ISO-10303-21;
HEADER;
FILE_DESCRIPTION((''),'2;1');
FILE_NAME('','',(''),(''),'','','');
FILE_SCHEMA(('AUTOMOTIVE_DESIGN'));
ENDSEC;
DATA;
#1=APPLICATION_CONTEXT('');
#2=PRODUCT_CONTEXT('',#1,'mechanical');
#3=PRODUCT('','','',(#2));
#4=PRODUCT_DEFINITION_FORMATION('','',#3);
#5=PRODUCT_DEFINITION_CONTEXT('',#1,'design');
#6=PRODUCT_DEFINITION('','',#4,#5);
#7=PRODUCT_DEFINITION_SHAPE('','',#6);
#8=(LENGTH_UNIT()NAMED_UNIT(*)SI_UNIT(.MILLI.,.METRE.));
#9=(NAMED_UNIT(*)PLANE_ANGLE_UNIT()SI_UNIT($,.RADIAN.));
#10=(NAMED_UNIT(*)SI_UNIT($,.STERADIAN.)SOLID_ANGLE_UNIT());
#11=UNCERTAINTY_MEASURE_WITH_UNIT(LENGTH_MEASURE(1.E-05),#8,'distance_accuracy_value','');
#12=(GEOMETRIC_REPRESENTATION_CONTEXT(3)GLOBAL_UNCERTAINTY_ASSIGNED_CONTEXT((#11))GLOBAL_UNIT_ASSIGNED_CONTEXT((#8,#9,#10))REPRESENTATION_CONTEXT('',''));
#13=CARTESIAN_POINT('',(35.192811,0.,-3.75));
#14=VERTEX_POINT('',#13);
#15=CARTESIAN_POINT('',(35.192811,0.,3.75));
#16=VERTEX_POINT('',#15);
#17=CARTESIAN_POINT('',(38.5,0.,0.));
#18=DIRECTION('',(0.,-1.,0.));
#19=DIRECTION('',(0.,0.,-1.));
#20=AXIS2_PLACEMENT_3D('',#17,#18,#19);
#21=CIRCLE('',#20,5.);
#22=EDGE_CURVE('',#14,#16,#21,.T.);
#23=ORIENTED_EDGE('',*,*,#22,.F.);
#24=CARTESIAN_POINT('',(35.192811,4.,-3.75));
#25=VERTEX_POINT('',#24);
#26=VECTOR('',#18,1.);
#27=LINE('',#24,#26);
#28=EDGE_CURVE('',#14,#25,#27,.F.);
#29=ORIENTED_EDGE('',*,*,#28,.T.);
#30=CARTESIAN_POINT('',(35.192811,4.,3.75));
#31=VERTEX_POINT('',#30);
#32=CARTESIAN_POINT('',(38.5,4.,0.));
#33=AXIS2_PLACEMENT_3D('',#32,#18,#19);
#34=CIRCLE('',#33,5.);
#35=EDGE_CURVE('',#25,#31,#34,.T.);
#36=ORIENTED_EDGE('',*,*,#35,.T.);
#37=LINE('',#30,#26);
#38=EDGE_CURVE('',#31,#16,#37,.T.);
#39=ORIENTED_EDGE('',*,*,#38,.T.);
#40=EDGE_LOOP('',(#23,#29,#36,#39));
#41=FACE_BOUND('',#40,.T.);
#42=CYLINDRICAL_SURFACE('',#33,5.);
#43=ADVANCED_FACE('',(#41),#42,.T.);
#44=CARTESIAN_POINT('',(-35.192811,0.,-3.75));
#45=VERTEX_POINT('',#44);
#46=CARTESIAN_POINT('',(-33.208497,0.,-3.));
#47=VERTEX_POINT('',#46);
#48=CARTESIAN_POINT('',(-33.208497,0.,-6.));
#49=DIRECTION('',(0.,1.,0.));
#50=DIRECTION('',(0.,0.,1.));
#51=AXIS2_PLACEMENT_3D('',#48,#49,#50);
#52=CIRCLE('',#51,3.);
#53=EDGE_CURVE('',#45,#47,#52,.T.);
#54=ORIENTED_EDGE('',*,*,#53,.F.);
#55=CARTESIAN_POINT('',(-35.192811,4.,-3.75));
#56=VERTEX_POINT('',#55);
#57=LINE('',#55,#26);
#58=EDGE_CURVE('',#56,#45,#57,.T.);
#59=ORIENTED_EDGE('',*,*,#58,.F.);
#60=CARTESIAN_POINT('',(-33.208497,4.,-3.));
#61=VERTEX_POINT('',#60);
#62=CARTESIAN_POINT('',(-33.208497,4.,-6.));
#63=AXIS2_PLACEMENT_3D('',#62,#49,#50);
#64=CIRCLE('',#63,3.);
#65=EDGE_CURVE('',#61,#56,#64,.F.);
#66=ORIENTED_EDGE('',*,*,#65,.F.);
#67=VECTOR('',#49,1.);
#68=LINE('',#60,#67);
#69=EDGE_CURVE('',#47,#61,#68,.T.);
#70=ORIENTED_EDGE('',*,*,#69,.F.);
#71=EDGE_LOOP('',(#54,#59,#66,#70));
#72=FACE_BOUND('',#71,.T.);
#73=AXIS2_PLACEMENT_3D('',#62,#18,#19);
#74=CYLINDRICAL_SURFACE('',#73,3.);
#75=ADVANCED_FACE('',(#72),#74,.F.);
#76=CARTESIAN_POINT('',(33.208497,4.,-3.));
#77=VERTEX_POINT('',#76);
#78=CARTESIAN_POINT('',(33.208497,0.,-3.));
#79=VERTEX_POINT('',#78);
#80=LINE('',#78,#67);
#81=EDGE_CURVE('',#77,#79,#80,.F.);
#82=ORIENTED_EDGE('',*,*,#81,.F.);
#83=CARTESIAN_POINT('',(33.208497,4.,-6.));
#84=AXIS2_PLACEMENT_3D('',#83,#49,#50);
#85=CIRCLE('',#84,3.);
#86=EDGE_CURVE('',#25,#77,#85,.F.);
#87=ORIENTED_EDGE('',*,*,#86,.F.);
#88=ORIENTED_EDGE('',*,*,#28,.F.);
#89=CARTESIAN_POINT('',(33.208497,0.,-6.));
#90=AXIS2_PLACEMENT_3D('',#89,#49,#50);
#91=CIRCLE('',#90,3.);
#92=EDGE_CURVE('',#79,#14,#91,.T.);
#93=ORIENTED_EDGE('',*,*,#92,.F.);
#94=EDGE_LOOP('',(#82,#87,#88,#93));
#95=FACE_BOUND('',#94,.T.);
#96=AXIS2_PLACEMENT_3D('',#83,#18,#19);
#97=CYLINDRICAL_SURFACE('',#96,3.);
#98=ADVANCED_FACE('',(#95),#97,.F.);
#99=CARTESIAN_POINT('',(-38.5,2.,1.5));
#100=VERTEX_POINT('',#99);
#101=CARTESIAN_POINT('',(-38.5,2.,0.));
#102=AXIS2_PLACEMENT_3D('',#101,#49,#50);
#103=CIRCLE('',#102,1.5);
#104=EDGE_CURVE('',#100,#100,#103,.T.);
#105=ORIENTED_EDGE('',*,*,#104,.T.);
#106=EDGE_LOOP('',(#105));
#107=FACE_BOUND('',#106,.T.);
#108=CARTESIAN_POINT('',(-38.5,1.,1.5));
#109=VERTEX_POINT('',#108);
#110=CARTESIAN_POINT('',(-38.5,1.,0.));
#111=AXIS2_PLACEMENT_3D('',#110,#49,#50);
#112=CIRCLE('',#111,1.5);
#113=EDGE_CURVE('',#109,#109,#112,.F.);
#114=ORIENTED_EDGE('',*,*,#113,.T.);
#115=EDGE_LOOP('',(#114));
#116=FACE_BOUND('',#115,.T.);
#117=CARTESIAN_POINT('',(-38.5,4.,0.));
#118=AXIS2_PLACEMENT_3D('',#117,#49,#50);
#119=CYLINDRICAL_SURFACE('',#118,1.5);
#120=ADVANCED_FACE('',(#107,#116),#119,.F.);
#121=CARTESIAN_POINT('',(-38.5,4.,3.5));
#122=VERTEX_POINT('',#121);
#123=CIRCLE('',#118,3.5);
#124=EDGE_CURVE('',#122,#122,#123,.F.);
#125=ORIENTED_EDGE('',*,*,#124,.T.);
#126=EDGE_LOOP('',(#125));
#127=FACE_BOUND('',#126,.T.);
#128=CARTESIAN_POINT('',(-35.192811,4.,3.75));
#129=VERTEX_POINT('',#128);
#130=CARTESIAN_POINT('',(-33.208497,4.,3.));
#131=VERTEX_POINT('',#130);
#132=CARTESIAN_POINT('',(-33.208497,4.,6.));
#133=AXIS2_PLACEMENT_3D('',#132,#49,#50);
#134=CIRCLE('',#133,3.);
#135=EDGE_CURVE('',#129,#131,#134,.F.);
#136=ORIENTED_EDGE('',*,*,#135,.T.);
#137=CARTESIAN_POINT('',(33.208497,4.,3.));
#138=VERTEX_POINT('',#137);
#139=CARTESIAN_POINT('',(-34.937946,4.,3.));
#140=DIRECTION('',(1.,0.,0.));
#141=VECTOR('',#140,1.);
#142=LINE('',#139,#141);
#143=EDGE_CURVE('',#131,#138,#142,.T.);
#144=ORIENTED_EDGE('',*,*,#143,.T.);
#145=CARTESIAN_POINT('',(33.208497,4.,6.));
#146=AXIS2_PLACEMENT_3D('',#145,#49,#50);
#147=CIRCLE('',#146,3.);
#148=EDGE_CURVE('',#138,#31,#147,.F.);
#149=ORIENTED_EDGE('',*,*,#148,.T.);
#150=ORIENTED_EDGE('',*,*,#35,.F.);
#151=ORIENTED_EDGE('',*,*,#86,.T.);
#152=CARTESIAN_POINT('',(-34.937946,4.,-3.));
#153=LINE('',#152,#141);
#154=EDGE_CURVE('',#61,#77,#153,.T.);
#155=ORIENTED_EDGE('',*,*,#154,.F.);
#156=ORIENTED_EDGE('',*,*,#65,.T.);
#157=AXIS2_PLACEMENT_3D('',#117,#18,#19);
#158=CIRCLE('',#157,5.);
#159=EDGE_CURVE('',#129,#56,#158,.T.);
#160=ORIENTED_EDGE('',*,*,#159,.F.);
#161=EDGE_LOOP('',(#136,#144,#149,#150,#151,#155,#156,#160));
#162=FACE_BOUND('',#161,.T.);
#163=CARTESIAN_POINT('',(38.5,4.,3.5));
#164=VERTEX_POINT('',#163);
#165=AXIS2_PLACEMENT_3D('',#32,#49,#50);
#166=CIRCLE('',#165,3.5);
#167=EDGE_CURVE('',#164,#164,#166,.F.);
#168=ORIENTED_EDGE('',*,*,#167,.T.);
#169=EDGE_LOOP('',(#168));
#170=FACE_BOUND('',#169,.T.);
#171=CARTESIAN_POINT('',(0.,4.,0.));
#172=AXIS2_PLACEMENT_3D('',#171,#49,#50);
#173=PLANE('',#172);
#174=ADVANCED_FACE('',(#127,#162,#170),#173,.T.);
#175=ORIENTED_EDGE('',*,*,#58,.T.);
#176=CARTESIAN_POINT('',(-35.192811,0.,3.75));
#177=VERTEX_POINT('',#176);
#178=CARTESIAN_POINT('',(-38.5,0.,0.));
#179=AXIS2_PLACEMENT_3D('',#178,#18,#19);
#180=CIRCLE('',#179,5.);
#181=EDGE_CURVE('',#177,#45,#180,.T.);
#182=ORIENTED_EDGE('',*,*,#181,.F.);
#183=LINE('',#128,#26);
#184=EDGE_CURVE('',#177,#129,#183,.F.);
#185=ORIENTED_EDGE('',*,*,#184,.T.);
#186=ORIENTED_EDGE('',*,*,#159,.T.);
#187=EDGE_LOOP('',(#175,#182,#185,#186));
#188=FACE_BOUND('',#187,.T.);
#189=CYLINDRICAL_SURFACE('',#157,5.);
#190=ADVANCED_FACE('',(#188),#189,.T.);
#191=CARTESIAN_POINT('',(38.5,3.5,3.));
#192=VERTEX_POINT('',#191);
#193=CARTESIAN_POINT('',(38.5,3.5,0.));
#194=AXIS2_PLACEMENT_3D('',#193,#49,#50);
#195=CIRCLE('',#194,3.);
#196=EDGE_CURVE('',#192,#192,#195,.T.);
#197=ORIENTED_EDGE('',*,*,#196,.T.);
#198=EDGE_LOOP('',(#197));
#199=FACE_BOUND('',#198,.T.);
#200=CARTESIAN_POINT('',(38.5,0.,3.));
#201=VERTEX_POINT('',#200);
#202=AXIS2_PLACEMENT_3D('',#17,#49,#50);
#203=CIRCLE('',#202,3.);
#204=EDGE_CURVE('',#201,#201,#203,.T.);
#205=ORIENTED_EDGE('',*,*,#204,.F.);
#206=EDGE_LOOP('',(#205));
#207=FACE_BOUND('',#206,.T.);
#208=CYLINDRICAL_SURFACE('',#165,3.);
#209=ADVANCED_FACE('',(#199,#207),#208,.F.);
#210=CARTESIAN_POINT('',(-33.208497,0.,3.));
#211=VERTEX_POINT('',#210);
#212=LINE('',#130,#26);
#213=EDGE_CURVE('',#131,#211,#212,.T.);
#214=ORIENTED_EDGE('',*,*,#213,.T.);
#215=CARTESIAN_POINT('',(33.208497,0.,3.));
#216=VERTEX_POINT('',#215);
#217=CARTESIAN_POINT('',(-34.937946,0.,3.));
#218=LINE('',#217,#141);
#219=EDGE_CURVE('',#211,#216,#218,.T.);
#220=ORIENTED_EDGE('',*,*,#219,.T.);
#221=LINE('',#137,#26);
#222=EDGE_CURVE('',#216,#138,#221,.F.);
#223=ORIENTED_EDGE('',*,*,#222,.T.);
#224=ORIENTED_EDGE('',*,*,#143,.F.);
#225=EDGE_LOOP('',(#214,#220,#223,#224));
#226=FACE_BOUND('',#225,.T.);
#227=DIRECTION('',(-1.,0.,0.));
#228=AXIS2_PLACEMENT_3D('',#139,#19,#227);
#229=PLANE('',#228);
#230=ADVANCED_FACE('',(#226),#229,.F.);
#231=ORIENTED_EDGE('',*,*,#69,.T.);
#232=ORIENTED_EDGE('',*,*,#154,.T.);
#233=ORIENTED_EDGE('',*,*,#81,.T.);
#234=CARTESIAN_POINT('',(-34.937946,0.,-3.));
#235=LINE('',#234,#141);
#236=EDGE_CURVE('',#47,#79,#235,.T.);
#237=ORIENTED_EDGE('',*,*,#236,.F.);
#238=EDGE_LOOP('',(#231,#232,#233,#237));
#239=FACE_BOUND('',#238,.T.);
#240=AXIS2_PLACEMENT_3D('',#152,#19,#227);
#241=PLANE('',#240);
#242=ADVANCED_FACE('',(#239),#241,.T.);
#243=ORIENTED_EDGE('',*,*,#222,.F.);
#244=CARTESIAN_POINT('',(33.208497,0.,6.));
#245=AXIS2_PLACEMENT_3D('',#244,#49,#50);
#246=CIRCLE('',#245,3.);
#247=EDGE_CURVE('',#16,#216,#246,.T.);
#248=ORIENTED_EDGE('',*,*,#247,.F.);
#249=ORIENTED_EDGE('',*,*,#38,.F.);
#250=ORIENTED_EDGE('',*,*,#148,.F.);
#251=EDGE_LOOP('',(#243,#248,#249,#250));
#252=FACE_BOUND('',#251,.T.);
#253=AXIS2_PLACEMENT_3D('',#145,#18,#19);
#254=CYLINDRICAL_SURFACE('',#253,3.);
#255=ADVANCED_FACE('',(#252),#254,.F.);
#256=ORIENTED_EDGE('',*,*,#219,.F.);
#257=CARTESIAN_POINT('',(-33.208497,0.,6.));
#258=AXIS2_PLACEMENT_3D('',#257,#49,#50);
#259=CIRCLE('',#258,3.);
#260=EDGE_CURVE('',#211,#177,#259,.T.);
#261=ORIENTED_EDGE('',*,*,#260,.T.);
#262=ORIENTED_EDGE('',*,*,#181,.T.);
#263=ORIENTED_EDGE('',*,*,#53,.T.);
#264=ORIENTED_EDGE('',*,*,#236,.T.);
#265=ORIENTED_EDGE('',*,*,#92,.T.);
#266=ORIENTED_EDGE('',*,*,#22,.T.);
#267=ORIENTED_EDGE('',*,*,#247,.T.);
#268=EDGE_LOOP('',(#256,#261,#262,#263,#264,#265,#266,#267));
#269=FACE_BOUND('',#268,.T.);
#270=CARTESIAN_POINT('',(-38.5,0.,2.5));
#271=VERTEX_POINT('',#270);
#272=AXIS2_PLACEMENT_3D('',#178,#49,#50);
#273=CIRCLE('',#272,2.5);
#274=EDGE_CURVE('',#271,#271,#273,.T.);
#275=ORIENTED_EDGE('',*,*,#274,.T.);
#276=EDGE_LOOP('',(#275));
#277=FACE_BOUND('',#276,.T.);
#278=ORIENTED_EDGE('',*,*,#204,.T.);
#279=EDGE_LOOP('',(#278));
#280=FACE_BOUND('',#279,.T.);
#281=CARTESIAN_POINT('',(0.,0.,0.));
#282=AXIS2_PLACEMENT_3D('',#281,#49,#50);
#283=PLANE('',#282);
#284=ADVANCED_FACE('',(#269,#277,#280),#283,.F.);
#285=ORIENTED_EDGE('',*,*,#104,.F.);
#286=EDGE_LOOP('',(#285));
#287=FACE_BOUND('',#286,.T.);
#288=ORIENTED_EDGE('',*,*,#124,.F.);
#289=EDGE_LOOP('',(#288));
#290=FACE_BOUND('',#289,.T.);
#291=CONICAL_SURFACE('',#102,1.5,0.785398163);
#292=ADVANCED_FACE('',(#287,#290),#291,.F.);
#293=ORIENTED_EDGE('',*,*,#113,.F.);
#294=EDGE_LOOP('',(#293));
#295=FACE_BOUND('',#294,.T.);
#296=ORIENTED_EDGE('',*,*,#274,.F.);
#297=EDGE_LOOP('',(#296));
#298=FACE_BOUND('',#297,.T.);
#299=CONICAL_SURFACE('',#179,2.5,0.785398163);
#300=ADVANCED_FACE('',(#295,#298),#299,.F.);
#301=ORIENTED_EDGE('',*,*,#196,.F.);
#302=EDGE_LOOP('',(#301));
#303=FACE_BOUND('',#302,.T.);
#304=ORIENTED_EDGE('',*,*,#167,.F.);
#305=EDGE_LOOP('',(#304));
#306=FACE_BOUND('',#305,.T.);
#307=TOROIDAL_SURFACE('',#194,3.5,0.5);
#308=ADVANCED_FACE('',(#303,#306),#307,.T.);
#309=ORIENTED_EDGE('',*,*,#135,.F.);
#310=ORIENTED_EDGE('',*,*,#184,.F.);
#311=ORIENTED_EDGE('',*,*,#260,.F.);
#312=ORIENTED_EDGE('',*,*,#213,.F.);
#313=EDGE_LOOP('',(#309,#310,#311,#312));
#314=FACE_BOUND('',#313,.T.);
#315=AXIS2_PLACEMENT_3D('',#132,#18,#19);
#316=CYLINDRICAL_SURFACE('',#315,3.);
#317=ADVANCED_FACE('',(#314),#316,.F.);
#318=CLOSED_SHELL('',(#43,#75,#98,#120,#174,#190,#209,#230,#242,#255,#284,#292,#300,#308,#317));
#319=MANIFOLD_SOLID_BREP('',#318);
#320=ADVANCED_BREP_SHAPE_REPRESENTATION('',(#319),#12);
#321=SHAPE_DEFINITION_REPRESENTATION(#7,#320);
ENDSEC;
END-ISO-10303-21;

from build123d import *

# Parameters (mm, degrees)
SKETCH1_W                = 73.441671578
SKETCH1_H                = 6
BOSS_EXTRUDE1_DEPTH      = 4
SKETCH2_R                = 5
BOSS_EXTRUDE3_DEPTH      = 4
SKETCH3_R                = 5
BOSS_EXTRUDE4_DEPTH      = 4
FILLET1_R                = 3
FILLET3_R                = 3
F_3_0_3_DIAMETER_HOLE1_D = 3
F_6_0_6_DIAMETER_HOLE1_D = 6
CHAMFER1_SIZE            = 2
CHAMFER2_SIZE            = 1
FILLET4_R                = 0.5


with BuildPart() as part:
    # Sketch1 → Boss-Extrude1 (new body)
    with BuildSketch(Plane(origin=(0, 0, 0), x_dir=(1, 0, 0), z_dir=(0, 1, 0))):
        with Locations((1.782889385, 0)):
            Rectangle(SKETCH1_W, SKETCH1_H)
    extrude(amount=BOSS_EXTRUDE1_DEPTH)


with BuildPart() as body_2:
    # Sketch2 → Boss-Extrude3 (new body)
    with BuildSketch(Plane.XZ):
        with Locations(Location((38.5, 0, 0), (0, 0, 270))):
            Circle(SKETCH2_R)
    extrude(amount=-BOSS_EXTRUDE3_DEPTH)


with BuildPart() as body_3:
    # Sketch3 → Boss-Extrude4 (new body)
    with BuildSketch(Plane.XZ):
        with Locations(Location((-38.5, 0, 0), (0, 0, 270))):
            Circle(SKETCH3_R)
    extrude(amount=-BOSS_EXTRUDE4_DEPTH)


with BuildPart() as part_1:
    add(part.part)

    # Intersect3: read off the stored shape, not the designer's step
    # Intersect3: union body 3
    add(body_3.part)

    # Fillet1
    fillet1_edges = [part_1.edges().sort_by_distance(p)[0] for p in [
        (-34.5, 2, 3),
        (-34.5, 2, -3),
    ]]
    fillet(fillet1_edges, radius=FILLET1_R)

    # Intersect4: read off the stored shape, not the designer's step
    # Intersect4: union body 2
    add(body_2.part)

    # Fillet3
    fillet3_edges = [part_1.edges().sort_by_distance(p)[0] for p in [
        (34.5, 2, 3),
        (34.5, 2, -3),
    ]]
    fillet(fillet3_edges, radius=FILLET3_R)

    # Ø3.0 (3) Diameter Hole1 (through all)
    with Locations(Plane(origin=(0, 4, 0), x_dir=(1, 0, 0), z_dir=(0, 1, 0))):
        with Locations((-38.5, 0)):
            Hole(F_3_0_3_DIAMETER_HOLE1_D / 2)

    # Ø6.0 (6) Diameter Hole1 (through all)
    with Locations(Plane(origin=(0, 4, 0), x_dir=(1, 0, 0), z_dir=(0, 1, 0))):
        with Locations((38.5, 0)):
            Hole(F_6_0_6_DIAMETER_HOLE1_D / 2)

    # Chamfer1
    chamfer1_edges = [part_1.edges().sort_by_distance(p)[0] for p in [
        (-37, 4, 0),
    ]]
    chamfer(chamfer1_edges, length=CHAMFER1_SIZE)

    # Chamfer2
    chamfer2_edges = [part_1.edges().sort_by_distance(p)[0] for p in [
        (-37, 0, 0),
    ]]
    chamfer(chamfer2_edges, length=CHAMFER2_SIZE)

    # Fillet4
    fillet4_edges = [part_1.edges().sort_by_distance(p)[0] for p in [
        (41.5, 4, 0),
    ]]
    fillet(fillet4_edges, radius=FILLET4_R)


solid = part_1.part
